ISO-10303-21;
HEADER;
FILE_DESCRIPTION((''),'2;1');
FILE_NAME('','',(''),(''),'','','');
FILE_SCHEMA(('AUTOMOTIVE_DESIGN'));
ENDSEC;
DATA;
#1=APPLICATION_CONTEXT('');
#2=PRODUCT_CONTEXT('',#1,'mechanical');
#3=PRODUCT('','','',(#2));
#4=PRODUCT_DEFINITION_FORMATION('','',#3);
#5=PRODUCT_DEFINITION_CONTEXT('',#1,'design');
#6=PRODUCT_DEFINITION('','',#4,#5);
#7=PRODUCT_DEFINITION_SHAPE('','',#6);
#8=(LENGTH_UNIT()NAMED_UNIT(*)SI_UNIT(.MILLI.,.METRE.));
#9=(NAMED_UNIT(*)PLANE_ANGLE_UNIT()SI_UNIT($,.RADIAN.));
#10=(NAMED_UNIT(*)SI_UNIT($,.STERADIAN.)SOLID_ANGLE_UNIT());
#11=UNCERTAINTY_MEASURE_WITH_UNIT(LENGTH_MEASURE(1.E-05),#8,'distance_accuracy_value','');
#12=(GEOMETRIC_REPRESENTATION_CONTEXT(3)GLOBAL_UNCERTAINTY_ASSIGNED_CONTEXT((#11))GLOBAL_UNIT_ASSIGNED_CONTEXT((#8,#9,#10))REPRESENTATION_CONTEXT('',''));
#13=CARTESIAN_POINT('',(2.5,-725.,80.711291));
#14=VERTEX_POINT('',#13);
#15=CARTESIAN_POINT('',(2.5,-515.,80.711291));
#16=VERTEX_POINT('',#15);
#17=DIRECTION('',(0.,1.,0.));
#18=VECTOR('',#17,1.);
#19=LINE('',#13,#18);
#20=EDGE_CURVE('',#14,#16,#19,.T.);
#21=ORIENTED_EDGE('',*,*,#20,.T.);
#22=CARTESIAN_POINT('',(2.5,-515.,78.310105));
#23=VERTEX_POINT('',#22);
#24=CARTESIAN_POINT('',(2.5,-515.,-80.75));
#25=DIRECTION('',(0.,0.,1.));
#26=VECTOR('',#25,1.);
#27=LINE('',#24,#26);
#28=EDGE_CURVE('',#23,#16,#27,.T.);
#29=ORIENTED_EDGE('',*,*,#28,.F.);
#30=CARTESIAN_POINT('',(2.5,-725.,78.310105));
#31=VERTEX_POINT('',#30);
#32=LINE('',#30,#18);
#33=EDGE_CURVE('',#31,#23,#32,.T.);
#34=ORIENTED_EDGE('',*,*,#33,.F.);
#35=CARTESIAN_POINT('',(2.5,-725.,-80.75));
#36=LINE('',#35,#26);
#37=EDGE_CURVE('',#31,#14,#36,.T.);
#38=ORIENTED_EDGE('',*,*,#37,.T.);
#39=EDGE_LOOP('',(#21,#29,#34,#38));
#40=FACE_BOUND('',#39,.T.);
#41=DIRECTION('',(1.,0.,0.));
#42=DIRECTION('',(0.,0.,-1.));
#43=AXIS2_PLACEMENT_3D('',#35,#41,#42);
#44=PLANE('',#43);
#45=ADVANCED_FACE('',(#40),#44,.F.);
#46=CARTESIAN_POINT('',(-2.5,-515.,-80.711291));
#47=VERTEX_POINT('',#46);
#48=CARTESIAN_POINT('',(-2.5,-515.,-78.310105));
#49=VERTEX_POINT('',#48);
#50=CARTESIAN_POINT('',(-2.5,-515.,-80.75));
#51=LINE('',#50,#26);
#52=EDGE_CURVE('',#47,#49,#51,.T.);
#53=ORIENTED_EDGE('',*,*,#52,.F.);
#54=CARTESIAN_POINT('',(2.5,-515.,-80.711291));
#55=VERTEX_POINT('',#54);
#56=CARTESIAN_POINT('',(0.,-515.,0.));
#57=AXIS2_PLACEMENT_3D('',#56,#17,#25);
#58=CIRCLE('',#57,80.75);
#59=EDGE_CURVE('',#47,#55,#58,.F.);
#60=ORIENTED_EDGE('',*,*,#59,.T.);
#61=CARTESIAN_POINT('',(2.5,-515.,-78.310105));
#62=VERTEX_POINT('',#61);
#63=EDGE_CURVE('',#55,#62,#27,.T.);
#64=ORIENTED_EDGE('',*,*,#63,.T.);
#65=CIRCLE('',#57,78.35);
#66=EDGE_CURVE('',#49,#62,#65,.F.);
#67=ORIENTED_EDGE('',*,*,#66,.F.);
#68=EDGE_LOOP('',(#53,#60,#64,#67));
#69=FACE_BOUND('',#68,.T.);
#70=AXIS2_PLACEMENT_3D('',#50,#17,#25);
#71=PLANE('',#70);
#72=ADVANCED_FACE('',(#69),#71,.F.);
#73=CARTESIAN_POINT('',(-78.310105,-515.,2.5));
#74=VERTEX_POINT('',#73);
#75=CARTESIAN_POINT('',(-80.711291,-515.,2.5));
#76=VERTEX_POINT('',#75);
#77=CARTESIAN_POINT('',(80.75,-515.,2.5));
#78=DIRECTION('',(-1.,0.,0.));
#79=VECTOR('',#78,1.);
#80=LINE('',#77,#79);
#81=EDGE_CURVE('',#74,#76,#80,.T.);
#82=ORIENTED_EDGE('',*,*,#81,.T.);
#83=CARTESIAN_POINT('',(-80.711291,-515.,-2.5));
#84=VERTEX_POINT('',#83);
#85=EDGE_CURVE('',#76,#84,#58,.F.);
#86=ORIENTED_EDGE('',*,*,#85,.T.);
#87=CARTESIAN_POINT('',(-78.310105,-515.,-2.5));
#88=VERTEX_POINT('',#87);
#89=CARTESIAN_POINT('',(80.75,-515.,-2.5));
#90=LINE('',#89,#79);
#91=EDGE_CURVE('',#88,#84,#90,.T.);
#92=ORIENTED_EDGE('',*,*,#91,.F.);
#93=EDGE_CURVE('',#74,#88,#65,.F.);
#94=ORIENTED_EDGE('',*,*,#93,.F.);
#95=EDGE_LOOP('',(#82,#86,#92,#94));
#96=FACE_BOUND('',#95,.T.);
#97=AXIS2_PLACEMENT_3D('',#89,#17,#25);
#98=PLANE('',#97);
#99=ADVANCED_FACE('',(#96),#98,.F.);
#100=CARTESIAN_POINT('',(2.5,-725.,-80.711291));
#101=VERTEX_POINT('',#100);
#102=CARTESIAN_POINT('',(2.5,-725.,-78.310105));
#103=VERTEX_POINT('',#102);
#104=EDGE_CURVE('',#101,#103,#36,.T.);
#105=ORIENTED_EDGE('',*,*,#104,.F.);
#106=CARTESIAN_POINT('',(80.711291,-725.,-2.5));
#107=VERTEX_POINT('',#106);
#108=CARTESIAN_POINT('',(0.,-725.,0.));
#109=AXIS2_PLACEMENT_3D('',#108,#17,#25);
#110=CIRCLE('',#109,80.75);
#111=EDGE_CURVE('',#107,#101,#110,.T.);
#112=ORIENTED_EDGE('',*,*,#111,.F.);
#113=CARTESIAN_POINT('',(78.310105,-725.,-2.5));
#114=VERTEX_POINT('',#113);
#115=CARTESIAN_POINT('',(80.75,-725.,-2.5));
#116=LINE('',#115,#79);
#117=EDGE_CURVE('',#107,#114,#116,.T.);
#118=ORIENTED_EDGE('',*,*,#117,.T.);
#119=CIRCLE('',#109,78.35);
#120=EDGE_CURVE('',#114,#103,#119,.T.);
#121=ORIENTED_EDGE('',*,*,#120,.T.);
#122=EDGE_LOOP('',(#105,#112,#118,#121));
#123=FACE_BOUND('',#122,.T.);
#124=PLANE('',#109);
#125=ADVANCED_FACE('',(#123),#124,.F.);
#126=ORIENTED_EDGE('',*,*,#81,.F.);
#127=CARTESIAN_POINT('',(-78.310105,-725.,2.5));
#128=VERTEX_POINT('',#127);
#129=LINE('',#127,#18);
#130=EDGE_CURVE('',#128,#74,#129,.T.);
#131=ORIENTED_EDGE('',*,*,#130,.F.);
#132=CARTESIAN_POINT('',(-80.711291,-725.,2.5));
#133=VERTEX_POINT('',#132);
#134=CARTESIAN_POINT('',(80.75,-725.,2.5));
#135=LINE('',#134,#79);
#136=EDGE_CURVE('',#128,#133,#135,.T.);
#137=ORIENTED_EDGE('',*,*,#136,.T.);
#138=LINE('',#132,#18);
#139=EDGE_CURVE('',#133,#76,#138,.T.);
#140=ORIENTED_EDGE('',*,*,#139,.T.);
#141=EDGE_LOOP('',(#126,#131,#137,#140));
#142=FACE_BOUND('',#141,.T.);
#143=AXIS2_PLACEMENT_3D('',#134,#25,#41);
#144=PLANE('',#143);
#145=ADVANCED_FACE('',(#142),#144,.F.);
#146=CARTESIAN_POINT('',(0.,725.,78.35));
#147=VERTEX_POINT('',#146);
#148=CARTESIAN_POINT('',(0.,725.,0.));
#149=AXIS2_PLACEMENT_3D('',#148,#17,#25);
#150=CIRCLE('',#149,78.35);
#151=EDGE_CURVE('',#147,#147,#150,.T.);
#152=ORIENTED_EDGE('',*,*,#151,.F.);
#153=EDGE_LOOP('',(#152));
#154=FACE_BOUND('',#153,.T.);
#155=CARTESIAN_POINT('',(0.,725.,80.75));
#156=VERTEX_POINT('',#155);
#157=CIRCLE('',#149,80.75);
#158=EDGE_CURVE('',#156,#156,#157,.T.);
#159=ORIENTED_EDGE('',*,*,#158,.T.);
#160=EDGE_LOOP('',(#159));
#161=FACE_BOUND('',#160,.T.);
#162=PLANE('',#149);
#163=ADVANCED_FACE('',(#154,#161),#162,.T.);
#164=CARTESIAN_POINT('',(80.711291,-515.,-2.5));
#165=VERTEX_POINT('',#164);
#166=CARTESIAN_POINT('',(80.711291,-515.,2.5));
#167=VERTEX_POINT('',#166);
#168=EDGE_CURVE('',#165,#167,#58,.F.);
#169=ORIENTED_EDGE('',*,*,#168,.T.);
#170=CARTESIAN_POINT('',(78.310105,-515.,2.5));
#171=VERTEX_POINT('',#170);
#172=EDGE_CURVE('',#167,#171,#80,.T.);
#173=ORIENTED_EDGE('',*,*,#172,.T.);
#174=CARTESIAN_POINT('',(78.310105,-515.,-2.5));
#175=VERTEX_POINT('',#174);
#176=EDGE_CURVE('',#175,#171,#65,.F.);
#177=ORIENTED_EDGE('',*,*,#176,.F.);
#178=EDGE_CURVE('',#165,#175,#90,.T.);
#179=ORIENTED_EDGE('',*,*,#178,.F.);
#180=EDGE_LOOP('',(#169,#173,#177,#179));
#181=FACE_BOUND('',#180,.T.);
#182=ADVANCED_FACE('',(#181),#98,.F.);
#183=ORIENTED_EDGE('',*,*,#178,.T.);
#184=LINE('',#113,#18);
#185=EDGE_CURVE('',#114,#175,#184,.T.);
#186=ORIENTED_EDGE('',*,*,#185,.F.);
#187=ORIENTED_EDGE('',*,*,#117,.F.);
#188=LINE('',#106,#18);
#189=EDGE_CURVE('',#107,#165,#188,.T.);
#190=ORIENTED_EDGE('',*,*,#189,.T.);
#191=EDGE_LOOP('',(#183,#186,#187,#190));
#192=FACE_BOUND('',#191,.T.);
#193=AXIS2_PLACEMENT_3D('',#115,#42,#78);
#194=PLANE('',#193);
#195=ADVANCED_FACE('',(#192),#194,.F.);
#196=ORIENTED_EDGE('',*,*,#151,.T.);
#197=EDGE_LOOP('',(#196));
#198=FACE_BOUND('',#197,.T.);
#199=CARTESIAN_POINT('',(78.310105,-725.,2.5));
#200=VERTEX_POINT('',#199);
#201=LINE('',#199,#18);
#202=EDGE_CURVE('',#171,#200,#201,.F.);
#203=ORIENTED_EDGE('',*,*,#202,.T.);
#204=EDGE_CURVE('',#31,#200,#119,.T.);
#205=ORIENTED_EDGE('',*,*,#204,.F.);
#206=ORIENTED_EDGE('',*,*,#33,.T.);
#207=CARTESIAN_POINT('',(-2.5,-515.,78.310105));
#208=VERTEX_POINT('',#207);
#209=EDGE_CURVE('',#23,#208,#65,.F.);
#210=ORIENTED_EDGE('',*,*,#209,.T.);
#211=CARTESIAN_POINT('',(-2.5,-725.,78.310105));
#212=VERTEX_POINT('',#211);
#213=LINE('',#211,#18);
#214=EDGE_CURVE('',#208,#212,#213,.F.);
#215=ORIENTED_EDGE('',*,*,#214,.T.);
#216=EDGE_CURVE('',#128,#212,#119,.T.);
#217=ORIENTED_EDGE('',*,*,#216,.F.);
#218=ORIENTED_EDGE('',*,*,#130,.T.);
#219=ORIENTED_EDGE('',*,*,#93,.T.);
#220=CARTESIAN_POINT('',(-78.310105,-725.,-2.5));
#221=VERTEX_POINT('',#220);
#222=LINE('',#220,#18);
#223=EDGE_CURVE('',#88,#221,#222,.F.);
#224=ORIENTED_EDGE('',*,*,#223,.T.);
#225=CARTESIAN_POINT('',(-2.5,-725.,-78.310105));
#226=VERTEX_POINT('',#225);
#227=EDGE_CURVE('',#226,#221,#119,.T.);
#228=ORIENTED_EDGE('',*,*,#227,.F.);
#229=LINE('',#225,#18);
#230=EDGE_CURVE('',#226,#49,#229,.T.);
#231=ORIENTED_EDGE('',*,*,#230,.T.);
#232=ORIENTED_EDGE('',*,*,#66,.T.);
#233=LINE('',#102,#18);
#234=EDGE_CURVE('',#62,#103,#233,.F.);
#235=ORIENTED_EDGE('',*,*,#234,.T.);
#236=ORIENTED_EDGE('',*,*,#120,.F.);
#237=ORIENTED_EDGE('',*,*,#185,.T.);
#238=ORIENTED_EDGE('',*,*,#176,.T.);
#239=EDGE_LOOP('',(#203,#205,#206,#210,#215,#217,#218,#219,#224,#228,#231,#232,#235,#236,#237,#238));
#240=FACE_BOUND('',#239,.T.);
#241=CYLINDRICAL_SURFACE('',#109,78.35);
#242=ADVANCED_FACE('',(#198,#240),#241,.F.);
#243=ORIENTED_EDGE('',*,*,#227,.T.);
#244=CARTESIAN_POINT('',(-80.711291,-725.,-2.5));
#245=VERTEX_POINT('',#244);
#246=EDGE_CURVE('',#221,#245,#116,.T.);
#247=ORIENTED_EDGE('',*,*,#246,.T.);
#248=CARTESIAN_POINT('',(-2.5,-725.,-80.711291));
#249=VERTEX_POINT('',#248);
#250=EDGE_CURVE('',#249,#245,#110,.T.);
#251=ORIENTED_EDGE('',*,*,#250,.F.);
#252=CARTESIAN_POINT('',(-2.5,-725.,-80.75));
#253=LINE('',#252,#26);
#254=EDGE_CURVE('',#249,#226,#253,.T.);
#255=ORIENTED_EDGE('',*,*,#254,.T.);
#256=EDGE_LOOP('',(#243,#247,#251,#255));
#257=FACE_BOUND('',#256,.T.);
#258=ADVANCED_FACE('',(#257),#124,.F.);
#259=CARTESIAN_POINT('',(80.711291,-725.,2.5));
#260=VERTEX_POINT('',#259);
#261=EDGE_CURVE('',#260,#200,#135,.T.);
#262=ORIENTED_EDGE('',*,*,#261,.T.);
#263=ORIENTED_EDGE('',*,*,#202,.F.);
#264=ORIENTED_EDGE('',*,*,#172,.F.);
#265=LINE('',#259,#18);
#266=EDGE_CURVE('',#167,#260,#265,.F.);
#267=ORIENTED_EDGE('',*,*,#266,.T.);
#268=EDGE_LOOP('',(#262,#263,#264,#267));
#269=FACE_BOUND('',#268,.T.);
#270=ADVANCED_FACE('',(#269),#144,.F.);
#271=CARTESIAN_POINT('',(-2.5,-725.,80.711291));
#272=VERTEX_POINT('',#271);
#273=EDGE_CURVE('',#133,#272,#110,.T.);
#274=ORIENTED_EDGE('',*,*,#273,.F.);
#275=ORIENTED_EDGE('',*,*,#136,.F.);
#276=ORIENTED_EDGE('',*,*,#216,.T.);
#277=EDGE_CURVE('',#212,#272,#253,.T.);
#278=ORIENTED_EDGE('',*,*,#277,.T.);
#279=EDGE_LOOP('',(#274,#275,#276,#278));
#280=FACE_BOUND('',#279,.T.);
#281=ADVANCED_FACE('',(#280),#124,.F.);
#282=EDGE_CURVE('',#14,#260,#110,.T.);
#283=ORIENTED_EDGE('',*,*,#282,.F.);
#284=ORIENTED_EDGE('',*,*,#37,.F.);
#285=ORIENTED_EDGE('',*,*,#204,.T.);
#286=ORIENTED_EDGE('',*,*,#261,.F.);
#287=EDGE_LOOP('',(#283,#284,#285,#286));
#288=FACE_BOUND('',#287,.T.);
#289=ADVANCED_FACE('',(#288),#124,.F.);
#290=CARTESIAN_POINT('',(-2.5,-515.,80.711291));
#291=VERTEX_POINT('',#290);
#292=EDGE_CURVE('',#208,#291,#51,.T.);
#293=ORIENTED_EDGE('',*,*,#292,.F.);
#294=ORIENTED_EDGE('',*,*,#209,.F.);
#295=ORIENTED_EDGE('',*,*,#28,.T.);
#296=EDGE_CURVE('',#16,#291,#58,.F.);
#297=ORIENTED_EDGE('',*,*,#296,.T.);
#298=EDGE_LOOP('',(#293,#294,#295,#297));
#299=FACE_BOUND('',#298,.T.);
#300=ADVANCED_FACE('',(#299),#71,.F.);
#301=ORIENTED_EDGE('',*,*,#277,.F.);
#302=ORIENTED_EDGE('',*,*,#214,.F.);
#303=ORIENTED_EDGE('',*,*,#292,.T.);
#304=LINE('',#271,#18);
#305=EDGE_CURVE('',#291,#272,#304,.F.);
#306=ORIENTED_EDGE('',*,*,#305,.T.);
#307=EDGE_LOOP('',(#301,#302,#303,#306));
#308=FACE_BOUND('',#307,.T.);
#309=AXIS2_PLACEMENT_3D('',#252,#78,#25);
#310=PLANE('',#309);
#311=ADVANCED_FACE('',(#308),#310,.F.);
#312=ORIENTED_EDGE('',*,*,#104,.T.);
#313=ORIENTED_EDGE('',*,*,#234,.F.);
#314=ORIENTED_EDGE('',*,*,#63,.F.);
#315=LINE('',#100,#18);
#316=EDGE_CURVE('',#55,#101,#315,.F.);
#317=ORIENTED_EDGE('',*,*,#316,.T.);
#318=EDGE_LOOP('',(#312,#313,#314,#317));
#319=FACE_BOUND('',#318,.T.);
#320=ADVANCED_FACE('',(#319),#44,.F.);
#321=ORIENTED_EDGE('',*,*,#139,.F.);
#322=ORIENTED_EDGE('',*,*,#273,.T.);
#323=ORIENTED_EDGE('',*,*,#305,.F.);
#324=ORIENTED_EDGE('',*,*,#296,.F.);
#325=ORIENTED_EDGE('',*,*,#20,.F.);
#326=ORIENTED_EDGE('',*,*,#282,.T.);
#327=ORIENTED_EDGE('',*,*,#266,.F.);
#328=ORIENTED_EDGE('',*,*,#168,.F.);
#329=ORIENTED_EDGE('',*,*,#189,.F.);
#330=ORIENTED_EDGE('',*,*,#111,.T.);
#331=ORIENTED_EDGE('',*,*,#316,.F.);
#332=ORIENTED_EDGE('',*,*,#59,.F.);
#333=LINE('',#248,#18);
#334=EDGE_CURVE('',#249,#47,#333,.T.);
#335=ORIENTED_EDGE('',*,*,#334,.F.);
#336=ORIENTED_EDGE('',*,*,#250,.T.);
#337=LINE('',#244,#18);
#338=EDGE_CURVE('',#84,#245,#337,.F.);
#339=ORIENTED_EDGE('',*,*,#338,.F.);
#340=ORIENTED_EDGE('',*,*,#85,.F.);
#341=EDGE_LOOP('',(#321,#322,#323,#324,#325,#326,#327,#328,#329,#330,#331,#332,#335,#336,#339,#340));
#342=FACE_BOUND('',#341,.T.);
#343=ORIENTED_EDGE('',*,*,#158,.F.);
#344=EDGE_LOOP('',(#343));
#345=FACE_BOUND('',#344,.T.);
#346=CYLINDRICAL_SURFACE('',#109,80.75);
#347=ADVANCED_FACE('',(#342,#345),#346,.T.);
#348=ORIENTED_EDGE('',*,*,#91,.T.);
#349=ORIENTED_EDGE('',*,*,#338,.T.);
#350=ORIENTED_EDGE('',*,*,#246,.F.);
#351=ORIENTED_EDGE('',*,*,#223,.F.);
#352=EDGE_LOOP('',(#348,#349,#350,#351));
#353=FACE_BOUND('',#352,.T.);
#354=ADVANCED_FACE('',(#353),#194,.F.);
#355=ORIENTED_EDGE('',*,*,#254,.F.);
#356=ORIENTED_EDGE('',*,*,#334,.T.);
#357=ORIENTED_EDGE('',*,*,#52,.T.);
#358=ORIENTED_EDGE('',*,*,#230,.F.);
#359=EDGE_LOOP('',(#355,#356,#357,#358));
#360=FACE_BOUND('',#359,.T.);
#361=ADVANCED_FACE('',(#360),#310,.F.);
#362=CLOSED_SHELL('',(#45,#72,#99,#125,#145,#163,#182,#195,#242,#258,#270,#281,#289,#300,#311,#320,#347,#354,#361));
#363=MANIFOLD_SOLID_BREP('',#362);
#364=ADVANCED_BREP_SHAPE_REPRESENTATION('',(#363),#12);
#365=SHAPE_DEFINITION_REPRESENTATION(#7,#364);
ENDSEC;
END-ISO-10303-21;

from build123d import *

# Parameters (mm, degrees)
BOSS_EXTRUDE1_DEPTH      = 725
BOSS_EXTRUDE1_DEPTH_BACK = 725
SKETCH1_R                = 80.75
SKETCH1_R_2              = 78.35
SKETCH2_W                = 5
SKETCH2_H                = 210
CUT_EXTRUDE1_DEPTH       = 734.938774694
CIRPATTERN1_START        = -725
CIRPATTERN1_DEPTH        = 210


# Read off the part's stored shape, not the designer's step: CirPattern1
with BuildPart() as part:
    # Sketch1 → Boss-Extrude1 (new, two sides: drawn at the far end of the back side and taken through both)
    with BuildSketch(Plane(origin=(0, 0, 0), x_dir=(1, 0, 0), z_dir=(0, 1, 0)).offset(-BOSS_EXTRUDE1_DEPTH_BACK)):
        with Locations(Location((0, 0, 0), (0, 0, 270))):
            Circle(SKETCH1_R)
        with Locations(Location((0, 0, 0), (0, 0, 270))):
            Circle(SKETCH1_R_2, mode=Mode.SUBTRACT)
    extrude(amount=BOSS_EXTRUDE1_DEPTH + BOSS_EXTRUDE1_DEPTH_BACK)

    # Sketch2 → Cut-Extrude1 (cut, symmetric)
    with BuildSketch(Plane.XY):
        with Locations((0, -620)):
            Rectangle(SKETCH2_W, SKETCH2_H)
    extrude(amount=CUT_EXTRUDE1_DEPTH, both=True, mode=Mode.SUBTRACT)

    # CirPattern1 outline → CirPattern1 (cut)
    with BuildSketch(Plane(origin=(0, 0, 0), x_dir=(1, 0, 0), z_dir=(0, 1, 0)).offset(CIRPATTERN1_START)):
        with BuildLine():
            ThreePointArc((-80.711291032, 2.5), (-80.75, 0), (-80.711291032, -2.5))
            Line((-80.711291032, -2.5), (-78.310104712, -2.5))
            ThreePointArc((-78.310104712, -2.5), (-78.35, 0), (-78.310104712, 2.5))
            Line((-78.310104712, 2.5), (-80.711291032, 2.5))
        make_face()
        with BuildLine():
            Line((78.310104712, -2.5), (80.711291032, -2.5))
            ThreePointArc((80.711291032, -2.5), (80.75, 0), (80.711291032, 2.5))
            Line((80.711291032, 2.5), (78.310104712, 2.5))
            ThreePointArc((78.310104712, 2.5), (78.35, 0), (78.310104712, -2.5))
        make_face()
    extrude(amount=CIRPATTERN1_DEPTH, mode=Mode.SUBTRACT)


solid = part.part
